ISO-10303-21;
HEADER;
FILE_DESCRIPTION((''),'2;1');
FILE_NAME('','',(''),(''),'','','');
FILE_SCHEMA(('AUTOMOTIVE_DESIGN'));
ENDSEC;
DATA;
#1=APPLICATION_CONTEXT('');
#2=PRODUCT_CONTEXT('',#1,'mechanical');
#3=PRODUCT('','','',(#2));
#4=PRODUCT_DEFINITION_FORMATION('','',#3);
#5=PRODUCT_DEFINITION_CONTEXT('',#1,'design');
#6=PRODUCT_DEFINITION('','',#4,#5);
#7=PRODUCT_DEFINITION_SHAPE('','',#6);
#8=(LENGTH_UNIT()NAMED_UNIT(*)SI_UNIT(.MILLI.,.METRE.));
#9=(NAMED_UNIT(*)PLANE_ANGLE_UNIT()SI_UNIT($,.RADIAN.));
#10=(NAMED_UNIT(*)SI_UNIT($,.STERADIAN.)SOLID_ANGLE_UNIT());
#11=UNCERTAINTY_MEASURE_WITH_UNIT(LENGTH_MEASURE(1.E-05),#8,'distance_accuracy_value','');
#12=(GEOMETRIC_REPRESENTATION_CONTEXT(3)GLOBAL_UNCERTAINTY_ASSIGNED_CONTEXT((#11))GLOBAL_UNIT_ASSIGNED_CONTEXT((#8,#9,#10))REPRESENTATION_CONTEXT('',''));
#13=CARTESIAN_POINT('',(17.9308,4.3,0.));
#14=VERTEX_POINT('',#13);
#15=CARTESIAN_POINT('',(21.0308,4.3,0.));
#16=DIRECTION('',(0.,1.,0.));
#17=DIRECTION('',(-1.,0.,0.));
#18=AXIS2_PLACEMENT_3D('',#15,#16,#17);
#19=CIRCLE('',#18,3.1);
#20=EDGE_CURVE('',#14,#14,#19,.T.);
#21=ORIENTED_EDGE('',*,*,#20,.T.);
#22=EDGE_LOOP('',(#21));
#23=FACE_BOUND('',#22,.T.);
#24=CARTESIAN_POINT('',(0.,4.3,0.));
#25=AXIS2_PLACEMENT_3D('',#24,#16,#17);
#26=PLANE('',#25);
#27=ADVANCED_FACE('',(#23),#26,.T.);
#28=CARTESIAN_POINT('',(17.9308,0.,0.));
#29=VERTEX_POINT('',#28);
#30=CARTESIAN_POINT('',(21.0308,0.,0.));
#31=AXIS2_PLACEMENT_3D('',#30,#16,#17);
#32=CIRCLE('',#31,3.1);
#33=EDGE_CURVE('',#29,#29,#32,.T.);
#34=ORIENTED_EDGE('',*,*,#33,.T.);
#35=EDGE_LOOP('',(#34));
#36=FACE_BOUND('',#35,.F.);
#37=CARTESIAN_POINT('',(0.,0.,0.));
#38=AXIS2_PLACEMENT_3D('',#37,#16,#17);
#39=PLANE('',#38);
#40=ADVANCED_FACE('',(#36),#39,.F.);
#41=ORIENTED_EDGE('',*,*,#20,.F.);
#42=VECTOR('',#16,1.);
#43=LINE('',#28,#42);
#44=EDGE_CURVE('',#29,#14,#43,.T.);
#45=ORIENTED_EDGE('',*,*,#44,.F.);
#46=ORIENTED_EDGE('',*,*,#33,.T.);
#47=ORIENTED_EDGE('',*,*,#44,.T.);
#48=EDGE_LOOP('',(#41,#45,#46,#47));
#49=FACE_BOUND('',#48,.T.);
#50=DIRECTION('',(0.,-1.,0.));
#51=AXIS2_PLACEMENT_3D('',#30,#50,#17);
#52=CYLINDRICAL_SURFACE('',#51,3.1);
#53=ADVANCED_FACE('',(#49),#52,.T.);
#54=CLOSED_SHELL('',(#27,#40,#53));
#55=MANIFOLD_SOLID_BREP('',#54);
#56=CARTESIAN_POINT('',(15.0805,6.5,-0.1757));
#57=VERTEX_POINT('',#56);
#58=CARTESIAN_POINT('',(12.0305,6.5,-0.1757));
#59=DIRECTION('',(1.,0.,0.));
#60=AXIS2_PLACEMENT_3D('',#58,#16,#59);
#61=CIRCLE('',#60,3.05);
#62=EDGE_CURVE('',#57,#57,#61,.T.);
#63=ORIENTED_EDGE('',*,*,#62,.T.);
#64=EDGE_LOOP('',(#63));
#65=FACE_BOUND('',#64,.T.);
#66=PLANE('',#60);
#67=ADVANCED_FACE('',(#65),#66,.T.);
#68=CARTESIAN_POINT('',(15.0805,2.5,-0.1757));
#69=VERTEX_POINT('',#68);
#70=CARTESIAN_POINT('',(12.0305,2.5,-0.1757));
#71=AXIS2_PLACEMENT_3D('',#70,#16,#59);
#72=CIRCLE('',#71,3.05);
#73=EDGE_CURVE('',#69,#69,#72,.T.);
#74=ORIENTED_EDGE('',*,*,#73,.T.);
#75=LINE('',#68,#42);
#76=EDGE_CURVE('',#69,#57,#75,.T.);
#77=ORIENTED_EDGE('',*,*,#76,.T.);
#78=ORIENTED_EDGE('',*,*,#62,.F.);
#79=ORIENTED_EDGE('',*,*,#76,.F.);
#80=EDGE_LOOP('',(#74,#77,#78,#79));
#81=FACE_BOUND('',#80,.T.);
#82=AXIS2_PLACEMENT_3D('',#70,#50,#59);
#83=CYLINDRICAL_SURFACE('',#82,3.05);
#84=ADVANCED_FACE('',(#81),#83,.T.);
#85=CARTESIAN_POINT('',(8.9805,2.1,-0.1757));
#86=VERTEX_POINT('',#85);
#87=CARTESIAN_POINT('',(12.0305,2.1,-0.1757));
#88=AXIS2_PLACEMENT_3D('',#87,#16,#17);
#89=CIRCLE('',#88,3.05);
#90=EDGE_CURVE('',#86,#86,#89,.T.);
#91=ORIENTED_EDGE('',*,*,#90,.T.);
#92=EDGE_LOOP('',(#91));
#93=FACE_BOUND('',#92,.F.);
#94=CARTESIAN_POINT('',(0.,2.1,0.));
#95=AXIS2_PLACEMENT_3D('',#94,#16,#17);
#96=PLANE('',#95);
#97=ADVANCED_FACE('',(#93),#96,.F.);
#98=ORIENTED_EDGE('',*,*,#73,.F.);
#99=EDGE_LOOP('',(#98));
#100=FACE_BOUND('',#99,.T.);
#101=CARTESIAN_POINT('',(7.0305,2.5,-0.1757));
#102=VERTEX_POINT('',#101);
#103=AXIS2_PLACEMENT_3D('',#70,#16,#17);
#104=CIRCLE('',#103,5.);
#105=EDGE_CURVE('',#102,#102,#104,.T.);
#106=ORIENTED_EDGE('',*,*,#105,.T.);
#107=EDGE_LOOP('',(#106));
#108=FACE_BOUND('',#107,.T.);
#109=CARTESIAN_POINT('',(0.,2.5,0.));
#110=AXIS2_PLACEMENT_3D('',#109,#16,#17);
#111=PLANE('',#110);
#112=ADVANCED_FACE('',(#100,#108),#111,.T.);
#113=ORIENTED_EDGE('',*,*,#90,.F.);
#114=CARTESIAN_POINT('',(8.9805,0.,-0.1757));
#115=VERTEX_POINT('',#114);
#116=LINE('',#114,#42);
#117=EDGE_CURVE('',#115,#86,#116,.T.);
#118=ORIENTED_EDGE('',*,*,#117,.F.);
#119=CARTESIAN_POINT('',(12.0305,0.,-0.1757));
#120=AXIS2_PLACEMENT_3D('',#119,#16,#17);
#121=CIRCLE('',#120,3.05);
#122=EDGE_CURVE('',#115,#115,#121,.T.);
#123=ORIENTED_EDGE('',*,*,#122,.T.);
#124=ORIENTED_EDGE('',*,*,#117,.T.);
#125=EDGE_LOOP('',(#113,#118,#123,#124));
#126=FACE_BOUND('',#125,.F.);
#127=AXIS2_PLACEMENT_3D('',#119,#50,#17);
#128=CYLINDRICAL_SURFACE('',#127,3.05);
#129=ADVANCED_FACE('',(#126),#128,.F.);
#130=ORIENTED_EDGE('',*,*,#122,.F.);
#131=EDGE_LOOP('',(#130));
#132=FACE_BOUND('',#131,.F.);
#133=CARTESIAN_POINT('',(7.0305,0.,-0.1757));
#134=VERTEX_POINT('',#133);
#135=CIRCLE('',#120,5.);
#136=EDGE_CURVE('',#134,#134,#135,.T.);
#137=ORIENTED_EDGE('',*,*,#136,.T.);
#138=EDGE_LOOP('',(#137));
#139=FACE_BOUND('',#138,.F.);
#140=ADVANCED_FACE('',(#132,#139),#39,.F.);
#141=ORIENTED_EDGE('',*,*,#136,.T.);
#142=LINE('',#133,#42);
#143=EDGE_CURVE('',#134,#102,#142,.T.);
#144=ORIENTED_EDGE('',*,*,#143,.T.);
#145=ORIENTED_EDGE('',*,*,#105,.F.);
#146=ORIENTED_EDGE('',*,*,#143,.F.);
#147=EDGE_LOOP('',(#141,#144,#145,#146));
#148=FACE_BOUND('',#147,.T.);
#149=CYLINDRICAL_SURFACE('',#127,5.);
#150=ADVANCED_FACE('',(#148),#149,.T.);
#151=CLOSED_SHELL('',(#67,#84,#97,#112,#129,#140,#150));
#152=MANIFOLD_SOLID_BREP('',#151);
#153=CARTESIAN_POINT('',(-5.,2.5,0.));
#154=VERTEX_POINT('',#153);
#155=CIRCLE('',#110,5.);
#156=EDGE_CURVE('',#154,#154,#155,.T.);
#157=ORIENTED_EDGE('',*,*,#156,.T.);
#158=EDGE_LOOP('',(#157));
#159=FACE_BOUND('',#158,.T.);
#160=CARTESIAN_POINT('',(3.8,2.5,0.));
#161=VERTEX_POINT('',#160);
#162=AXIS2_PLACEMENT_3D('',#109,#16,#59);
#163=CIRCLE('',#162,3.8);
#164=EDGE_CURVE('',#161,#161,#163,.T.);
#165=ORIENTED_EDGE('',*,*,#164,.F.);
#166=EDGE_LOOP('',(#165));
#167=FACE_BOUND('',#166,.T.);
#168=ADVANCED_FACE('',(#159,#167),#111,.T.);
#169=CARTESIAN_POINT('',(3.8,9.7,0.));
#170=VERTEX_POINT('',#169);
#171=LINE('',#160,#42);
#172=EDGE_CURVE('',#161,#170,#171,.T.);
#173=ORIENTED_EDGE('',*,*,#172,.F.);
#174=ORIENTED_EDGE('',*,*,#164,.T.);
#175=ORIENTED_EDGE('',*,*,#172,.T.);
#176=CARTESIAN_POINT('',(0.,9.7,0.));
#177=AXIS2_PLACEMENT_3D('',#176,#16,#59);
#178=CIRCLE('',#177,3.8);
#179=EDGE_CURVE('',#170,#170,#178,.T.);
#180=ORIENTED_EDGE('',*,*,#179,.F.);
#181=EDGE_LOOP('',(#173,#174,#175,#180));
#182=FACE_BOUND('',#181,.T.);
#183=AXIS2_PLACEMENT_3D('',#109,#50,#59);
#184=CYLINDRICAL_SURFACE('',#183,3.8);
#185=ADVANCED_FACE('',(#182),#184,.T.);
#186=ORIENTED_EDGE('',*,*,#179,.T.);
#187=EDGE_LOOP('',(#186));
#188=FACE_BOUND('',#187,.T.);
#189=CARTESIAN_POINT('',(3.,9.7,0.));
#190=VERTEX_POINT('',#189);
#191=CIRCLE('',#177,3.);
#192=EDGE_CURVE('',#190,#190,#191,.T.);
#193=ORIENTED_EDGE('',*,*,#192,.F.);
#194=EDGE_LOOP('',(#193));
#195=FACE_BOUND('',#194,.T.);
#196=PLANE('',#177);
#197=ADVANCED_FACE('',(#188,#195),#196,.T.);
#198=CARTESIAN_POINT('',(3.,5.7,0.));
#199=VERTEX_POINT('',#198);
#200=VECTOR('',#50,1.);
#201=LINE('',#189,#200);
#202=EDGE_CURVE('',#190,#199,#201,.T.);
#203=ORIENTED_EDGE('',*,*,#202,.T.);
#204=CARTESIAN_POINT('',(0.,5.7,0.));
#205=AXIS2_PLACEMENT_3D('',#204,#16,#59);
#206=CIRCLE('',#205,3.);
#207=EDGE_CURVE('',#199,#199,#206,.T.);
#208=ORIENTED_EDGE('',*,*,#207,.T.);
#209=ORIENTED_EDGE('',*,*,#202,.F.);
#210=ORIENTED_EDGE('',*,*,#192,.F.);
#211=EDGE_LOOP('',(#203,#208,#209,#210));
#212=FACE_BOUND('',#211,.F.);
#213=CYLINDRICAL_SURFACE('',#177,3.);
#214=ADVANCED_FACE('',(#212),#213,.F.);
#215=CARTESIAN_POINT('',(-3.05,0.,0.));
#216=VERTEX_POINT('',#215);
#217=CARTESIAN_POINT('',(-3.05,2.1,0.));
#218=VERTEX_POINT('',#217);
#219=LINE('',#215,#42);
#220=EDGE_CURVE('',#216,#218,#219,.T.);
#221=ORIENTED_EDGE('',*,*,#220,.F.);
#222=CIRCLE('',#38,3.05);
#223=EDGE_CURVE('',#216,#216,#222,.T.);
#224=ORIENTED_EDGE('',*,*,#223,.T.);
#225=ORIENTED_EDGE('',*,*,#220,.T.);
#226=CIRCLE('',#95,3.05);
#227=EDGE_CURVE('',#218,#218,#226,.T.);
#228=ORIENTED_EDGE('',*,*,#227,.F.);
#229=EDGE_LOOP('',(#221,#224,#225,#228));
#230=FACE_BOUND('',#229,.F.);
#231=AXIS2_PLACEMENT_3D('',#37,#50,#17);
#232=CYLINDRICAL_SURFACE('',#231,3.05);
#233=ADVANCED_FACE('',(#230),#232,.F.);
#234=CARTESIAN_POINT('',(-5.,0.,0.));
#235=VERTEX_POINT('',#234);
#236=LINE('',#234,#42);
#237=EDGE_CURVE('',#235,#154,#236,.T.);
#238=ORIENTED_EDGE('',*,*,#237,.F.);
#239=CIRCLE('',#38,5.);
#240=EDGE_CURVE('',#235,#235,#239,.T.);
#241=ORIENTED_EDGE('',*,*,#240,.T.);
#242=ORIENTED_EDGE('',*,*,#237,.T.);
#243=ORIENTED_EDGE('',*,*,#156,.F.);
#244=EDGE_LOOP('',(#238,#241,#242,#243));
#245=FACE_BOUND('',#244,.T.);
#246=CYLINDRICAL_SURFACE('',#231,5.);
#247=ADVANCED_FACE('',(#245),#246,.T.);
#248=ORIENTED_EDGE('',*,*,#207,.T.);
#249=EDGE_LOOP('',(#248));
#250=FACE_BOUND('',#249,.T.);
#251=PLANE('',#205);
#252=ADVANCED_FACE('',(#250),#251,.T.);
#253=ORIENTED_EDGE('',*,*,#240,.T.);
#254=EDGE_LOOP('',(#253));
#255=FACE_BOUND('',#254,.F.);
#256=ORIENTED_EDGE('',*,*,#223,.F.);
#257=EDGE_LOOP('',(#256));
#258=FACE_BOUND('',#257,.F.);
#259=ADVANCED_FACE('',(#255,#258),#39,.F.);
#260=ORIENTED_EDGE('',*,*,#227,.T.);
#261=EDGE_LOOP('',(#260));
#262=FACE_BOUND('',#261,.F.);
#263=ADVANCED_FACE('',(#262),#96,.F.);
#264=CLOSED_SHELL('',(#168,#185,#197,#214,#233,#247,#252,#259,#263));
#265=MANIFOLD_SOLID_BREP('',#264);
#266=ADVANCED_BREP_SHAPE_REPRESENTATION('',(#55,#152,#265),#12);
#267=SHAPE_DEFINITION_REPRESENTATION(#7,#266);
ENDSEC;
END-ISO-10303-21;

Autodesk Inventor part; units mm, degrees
ref_plane "YZ Plane" through (0, 0, 0) normal (1, 0, 0) x (0, 1, 0)
ref_plane "XZ Plane" through (0, 0, 0) normal (0, 1, 0) x (-1, 0, 0)
ref_plane "XY Plane" through (0, 0, 0) normal (0, 0, 1) x (1, 0, 0)
sketch "Sketch4" plane through (0, 0, 0) normal (0, 1, 0) x (-1, 0, 0)
  circle A0 centre (0, 0) radius 3.05
  circle A1 centre (0, 0) radius 5
  circle A2 centre (-12.0305, -0.1757) radius 3.05
  circle A3 centre (-12.0305, -0.1757) radius 5
  circle A4 centre (-21.0308, 0) radius 3.1
  dimension "d13" = 6.1
  dimension "d14" = 10
  dimension "d25" = 6.1
  dimension "d26" = 10
  dimension "d30" = 6.2
extrude "Extrusion5" add sketch "Sketch4" along normal blind 2.5 contours A0 | A1 | A2 | A3
extrude "Extrusion6" cut sketch "Sketch4" along normal blind 2.1 contours A0 | A2
sketch "Sketch5" plane through (0, 2.5, 0) normal (0, 1, 0) x (1, 0, 0)
  circle A0 centre (0, 0) radius 3.8
  dimension "d19" = 7.6
extrude "Extrusion7" add sketch "Sketch5" along normal blind 7.2
sketch "Sketch6" plane through (0, 9.7, 0) normal (0, 1, 0) x (1, 0, 0)
  circle A0 centre (0, 0) radius 3
  dimension "d22" = 6
extrude "Extrusion8" cut sketch "Sketch6" against normal blind 4
sketch "Sketch7" plane through (12.0305, 2.5, -0.1757) normal (0, 1, 0) x (1, 0, 0)
  circle A0 centre (0, 0) radius 3.05
  circle A1 centre (0, 0) radius 5 projected
  point P0 (-12.0305, -0.1757)
  dimension "d27" = 6.1
extrude "Extrusion9" add sketch "Sketch7" along normal blind 4 contours A0
extrude "Extrusion10" add sketch "Sketch4" along normal blind 4.3 contours A4
sketch "Sketch8" plane through (0, 0, 0) normal (0, 1, 0) x (-1, 0, 0)
  circle A0 centre (0, 0) radius 3.05 projected
  circle A1 centre (0, 0) radius 5 projected
  circle A2 centre (-12.0305, -0.1757) radius 5 projected
split body "Split1" sketch "Sketch8" result two bodies curves A1 first body at (3.2893, 7.3, 0.2655)
split body "Split2" sketch "Sketch8" result two bodies bodies 3 curves A2 first body at (7.5887, 1.6667, -0.8976)
equation "\"d19\" = Shaft_Diameter - Shaft_Fit_Loose"
equation "\"Shaft_Diameter\" = 8"
equation "\"Shaft_Fit_Loose\" = 0.4"
equation "\"Shaft_Width\" = 7"
equation "\"Distance_Between\" = 3"
properties part number "Multiboard Thread insert"
